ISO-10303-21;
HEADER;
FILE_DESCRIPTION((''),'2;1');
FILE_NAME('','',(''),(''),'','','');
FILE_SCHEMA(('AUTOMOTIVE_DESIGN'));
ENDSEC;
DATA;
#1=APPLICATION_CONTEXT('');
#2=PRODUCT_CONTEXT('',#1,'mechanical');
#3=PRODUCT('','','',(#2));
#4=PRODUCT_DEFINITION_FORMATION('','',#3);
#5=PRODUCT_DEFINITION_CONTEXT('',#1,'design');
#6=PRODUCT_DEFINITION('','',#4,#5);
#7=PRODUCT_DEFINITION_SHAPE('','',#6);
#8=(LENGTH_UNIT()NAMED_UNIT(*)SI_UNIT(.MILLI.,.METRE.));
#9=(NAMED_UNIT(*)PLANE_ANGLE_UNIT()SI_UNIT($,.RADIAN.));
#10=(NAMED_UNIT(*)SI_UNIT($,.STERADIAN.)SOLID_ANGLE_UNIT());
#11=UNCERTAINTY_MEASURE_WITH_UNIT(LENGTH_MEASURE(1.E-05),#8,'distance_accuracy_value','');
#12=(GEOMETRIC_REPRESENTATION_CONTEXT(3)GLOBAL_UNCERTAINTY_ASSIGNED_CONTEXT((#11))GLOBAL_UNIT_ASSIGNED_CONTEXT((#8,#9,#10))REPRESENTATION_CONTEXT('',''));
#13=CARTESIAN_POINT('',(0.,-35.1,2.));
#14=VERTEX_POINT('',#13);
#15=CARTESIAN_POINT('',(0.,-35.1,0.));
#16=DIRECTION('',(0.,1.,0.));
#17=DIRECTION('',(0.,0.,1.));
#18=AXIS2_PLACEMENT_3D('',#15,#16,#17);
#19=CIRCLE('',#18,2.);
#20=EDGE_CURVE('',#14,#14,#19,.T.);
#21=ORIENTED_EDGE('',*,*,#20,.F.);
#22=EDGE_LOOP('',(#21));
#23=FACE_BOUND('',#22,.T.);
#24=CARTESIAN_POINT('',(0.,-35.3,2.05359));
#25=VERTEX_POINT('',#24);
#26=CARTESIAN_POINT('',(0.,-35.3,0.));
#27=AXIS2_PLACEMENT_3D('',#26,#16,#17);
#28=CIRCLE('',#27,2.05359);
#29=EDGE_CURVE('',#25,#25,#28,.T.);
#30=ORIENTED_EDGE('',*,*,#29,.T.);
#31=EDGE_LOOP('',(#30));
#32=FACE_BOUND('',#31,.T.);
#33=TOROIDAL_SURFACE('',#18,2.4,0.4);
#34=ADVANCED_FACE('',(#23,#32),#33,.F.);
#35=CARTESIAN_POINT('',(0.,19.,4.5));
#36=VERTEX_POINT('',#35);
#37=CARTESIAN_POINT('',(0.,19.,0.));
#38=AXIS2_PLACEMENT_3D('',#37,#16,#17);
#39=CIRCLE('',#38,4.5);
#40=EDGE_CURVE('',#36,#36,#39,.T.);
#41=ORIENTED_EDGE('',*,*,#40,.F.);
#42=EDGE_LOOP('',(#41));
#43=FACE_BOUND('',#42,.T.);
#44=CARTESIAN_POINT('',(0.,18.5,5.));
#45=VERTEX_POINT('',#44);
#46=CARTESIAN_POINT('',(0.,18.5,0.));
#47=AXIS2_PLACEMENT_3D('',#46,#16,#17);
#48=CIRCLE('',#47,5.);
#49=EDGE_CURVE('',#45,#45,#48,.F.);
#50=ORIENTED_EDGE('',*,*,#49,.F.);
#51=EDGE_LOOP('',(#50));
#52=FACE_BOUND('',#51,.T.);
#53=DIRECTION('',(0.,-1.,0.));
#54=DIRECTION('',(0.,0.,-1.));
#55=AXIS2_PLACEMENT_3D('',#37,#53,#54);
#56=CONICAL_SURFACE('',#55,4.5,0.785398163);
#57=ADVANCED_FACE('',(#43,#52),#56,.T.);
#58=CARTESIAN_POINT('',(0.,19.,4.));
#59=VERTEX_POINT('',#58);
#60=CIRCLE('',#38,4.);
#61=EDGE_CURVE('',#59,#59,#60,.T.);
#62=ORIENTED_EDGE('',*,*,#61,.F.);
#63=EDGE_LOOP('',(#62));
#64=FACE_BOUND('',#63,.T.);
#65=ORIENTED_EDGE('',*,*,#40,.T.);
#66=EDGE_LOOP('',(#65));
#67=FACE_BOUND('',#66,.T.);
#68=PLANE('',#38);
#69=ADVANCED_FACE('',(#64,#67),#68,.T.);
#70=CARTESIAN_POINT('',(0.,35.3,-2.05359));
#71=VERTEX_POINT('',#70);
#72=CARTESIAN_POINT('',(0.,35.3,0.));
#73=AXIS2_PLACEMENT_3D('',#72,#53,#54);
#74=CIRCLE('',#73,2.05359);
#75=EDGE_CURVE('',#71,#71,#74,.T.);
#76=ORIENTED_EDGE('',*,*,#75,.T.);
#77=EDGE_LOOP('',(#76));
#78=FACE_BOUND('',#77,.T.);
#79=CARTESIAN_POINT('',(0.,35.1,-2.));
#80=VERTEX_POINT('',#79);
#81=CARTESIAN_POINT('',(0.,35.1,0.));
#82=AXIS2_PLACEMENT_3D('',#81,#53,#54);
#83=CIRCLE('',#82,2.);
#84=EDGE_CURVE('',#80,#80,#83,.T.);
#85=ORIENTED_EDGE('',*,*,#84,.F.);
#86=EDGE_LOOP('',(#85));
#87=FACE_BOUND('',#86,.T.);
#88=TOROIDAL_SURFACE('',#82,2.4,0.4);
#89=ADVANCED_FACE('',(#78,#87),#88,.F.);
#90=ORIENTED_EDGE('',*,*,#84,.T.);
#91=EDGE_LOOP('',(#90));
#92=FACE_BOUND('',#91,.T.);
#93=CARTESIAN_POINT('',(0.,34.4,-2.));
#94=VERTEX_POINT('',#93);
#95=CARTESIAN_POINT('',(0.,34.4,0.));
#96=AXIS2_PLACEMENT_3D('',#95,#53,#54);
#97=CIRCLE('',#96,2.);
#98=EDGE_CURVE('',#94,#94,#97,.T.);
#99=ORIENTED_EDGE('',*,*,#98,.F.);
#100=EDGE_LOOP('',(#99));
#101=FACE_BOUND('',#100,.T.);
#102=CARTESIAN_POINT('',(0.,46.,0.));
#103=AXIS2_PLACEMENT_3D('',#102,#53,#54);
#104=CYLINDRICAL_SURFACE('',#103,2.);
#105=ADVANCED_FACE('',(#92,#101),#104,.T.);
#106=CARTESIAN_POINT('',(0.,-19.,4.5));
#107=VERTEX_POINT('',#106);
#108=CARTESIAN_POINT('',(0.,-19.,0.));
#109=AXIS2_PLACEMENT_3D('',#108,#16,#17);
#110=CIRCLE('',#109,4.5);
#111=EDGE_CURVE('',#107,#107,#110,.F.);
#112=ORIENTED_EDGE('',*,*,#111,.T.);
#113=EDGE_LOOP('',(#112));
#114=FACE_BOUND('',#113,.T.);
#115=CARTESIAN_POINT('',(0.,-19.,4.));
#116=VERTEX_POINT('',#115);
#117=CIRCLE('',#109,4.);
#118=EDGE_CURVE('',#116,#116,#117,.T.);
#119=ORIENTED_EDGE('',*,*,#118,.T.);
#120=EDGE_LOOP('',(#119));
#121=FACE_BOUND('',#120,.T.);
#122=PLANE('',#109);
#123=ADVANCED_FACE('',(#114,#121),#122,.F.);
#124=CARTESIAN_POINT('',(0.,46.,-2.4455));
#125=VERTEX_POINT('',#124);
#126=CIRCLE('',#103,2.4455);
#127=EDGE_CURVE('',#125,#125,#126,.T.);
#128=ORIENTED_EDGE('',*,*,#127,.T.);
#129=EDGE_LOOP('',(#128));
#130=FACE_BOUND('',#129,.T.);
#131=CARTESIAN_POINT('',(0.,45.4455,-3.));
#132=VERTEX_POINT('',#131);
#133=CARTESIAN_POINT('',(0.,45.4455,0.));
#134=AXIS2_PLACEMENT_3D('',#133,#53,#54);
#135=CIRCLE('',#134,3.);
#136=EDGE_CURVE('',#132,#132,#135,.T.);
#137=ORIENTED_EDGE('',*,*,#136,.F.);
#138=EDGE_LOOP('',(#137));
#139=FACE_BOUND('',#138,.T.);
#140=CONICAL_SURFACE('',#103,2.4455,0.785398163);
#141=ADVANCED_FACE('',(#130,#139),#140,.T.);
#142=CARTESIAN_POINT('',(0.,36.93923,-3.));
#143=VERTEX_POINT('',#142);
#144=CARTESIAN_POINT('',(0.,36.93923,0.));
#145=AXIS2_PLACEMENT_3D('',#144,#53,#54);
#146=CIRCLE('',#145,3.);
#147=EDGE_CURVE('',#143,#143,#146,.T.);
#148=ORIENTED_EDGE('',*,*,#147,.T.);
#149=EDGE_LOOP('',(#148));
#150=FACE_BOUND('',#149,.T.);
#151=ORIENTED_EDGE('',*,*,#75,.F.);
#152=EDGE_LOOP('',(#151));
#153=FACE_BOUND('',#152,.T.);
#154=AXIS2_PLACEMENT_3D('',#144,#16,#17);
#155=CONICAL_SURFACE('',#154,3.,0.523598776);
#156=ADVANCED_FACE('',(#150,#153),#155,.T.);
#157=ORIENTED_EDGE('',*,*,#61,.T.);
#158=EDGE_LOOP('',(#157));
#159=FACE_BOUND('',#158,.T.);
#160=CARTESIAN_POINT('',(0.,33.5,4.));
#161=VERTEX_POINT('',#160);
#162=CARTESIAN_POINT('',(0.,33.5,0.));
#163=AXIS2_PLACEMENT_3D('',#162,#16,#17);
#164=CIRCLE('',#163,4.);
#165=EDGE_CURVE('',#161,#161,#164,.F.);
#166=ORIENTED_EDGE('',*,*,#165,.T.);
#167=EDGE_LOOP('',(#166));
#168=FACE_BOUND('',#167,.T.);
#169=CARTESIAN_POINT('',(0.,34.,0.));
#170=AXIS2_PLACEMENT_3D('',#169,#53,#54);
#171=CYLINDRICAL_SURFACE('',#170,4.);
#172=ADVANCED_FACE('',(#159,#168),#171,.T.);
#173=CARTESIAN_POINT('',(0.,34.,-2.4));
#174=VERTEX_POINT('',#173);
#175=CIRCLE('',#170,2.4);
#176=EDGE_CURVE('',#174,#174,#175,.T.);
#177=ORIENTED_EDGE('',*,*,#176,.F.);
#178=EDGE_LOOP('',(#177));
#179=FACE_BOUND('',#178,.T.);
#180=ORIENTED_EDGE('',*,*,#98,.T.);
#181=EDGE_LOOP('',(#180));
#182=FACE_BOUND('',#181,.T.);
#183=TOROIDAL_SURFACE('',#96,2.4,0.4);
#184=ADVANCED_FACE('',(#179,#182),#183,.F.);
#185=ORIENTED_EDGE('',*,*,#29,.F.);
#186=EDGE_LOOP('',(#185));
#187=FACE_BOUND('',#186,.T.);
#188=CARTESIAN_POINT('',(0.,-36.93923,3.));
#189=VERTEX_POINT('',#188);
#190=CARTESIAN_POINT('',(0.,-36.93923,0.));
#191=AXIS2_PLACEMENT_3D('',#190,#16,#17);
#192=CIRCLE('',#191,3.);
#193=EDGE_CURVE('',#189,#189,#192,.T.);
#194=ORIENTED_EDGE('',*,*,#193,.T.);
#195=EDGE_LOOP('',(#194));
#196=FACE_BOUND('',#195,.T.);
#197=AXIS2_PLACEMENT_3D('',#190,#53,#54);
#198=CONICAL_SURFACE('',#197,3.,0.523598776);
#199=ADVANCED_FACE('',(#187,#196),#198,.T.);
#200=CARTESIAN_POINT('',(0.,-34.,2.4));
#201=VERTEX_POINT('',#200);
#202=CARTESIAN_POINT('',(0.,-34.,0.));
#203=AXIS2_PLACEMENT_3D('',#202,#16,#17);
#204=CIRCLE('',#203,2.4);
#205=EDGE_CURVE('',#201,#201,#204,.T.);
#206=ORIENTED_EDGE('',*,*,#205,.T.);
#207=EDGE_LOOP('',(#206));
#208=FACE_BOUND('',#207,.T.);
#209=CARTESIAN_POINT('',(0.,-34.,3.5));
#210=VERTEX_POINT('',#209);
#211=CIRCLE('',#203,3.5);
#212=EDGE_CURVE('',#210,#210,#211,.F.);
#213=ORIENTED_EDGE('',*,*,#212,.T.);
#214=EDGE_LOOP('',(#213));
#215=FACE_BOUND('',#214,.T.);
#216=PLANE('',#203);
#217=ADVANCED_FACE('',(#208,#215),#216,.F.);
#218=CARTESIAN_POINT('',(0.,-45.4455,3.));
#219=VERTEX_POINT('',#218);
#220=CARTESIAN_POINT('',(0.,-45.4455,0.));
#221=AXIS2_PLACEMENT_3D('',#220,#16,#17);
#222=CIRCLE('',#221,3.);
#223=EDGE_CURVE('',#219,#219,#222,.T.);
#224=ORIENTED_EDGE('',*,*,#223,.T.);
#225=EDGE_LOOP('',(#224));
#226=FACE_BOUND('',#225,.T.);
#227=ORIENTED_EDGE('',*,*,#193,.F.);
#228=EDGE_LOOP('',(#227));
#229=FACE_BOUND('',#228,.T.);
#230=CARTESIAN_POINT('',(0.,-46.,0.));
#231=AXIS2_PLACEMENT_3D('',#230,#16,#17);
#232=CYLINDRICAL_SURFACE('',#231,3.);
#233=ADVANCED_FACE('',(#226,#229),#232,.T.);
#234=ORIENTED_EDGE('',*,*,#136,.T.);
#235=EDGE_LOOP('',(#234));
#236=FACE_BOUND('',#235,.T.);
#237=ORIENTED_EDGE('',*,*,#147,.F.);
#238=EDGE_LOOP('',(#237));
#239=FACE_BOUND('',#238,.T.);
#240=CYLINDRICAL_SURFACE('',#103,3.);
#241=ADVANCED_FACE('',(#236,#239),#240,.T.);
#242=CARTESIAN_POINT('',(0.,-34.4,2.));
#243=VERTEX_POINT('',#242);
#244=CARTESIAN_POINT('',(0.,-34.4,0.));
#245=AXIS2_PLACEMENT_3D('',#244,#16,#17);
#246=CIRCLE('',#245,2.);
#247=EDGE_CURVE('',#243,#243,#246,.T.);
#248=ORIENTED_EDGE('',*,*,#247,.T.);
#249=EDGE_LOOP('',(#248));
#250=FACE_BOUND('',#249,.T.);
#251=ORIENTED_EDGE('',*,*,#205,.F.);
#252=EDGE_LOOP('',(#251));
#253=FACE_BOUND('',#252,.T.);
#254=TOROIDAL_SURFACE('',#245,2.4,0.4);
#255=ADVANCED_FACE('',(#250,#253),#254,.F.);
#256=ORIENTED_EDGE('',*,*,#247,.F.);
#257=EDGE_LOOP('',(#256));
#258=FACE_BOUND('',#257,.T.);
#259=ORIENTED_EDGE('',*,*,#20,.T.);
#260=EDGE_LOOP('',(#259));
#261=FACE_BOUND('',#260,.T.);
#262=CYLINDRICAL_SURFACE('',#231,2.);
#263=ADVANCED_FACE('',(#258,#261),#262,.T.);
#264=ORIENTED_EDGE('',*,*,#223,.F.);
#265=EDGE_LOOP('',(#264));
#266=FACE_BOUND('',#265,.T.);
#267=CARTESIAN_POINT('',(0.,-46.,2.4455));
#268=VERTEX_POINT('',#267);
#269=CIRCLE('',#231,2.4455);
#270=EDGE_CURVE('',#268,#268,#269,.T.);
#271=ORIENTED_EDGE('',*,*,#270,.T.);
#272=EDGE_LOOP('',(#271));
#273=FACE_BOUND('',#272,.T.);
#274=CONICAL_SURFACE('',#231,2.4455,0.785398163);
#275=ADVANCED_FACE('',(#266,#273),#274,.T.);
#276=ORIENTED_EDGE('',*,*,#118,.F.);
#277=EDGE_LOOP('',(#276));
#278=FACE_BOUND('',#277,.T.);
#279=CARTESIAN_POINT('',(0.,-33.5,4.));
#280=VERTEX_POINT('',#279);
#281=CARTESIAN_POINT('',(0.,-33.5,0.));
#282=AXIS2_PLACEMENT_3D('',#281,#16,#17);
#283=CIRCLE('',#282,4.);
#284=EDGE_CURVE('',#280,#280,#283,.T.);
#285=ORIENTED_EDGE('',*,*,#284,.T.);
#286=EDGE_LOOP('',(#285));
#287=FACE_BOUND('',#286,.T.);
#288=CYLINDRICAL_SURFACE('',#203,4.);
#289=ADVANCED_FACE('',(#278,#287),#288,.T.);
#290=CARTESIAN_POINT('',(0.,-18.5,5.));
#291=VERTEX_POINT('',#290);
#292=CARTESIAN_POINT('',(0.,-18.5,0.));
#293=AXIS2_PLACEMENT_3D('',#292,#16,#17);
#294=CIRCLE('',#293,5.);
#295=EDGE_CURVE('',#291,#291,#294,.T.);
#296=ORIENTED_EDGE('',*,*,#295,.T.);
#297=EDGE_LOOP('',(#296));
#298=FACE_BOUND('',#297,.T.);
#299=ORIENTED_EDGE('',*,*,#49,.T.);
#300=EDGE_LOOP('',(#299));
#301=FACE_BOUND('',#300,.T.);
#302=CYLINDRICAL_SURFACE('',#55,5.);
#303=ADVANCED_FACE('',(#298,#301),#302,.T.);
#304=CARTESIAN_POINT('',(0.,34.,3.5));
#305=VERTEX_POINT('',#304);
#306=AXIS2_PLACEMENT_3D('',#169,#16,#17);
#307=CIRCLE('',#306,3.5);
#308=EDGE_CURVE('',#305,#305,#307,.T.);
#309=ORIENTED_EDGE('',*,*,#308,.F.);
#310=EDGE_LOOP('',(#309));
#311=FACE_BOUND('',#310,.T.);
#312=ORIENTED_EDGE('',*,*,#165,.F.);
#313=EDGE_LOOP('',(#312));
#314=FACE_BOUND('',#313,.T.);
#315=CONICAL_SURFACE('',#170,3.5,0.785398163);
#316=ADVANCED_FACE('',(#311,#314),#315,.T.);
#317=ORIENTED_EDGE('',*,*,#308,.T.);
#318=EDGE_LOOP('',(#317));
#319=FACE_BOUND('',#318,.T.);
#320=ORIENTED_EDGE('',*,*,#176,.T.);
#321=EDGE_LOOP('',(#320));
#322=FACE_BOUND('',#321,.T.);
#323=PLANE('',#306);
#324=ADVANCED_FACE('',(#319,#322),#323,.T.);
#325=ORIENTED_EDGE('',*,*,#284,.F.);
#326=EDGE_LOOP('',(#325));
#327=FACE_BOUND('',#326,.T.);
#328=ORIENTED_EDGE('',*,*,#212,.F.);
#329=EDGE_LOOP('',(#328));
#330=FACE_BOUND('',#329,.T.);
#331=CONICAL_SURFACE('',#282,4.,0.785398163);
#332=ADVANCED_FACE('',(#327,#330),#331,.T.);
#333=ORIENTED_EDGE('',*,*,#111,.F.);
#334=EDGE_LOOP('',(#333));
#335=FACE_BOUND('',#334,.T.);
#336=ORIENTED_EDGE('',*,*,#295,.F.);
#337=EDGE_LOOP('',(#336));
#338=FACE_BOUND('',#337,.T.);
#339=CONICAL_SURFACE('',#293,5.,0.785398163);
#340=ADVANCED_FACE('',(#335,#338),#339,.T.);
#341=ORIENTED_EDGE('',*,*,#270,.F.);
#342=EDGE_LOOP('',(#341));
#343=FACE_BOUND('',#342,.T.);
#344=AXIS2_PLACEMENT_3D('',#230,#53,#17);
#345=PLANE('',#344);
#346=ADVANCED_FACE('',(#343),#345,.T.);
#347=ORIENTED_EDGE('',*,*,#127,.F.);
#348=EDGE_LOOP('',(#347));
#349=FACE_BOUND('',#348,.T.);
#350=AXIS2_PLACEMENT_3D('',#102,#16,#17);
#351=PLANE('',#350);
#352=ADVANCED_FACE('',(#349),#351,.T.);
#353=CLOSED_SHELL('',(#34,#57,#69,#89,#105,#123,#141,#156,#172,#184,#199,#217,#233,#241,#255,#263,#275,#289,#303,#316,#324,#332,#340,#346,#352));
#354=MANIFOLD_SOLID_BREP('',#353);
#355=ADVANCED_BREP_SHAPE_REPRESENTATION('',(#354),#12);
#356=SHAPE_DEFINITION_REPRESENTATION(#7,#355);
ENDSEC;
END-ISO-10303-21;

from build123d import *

# Parameters (mm, degrees)
SKETCH1_R           = 5
BOSS_EXTRUDE1_DEPTH = 19
SKETCH2_R           = 4
BOSS_EXTRUDE2_DEPTH = 15
BOSS_EXTRUDE3_START = -53
SKETCH2_2_R         = 4
BOSS_EXTRUDE3_DEPTH = 15
CHAMFER2_SIZE       = 0.5
SKETCH3_R           = 3.1
BOSS_EXTRUDE4_DEPTH = 12
CHAMFER3_SIZE       = 0.5


# Read off the part's stored shape, not the designer's step: M6 Machine Threads Stud1, M6 Machine Threads Stud2
with BuildPart() as part:
    # Sketch1 → Boss-Extrude1 (new, symmetric)
    with BuildSketch(Plane(origin=(0, 0, 0), x_dir=(1, 0, 0), z_dir=(0, 1, 0))):
        with Locations(Location((0, 0, 0), (0, 0, 270))):
            Circle(SKETCH1_R)
    extrude(amount=BOSS_EXTRUDE1_DEPTH, both=True)

    # Sketch2 → Boss-Extrude2 (add)
    with BuildSketch(Plane(origin=(0, 19, 0), x_dir=(1, 0, 0), z_dir=(0, 1, 0))):
        with Locations(Location((0, 0, 0), (0, 0, 270))):
            Circle(SKETCH2_R)
    extrude(amount=BOSS_EXTRUDE2_DEPTH)

    # Sketch2<2> → Boss-Extrude3 (add)
    with BuildSketch(Plane(origin=(0, 19, 0), x_dir=(1, 0, 0), z_dir=(0, 1, 0)).offset(BOSS_EXTRUDE3_START)):
        with Locations(Location((0, 0, 0), (0, 0, 270))):
            Circle(SKETCH2_2_R)
    extrude(amount=BOSS_EXTRUDE3_DEPTH)

    # Chamfer2
    chamfer2_edges = [part.edges().sort_by_distance(p)[0] for p in [
        (0, -19, -5),
        (0, 19, -5),
    ]]
    chamfer(chamfer2_edges, length=CHAMFER2_SIZE)

    # Sketch3 → Boss-Extrude4 (add)
    with BuildSketch(Plane(origin=(0, 34, 0), x_dir=(1, 0, 0), z_dir=(0, 1, 0))):
        with Locations(Location((0, 0, 0), (0, 0, 270))):
            Circle(SKETCH3_R)
    boss_extrude4 = extrude(amount=BOSS_EXTRUDE4_DEPTH)

    # M6 Machine Threads Stud1 outline → M6 Machine Threads Stud1 (revolve, cut)
    with BuildSketch(Plane.XY):
        with BuildLine():
            Line((3.1, 46), (2.4455, 46))
            Line((2.4455, 46), (3, 45.4455))
            Line((3, 45.4455), (3, 36.939230485))
            Line((3, 36.939230485), (2.053589838, 35.3))
            ThreePointArc((2.053589838, 35.3), (2.013629669, 35.203527618), (2, 35.1))
            Line((2, 35.1), (2, 34.4))
            ThreePointArc((2, 34.4), (2.117157288, 34.117157288), (2.4, 34))
            Line((2.4, 34), (3.1, 34))
            Line((3.1, 34), (3.1, 46))
        make_face()
    revolve(axis=Axis((0, 0, 0), (0, 1, 0)), mode=Mode.SUBTRACT)

    # Mirror1: Boss-Extrude4 across plane
    add(boss_extrude4.mirror(Plane.ZX))

    # M6 Machine Threads Stud2 outline → M6 Machine Threads Stud2 (revolve, cut)
    with BuildSketch(Plane.XY):
        with BuildLine():
            Line((2.4455, -46), (3.1, -46))
            Line((3.1, -46), (3.1, -34))
            Line((3.1, -34), (2.4, -34))
            ThreePointArc((2.4, -34), (2.117157288, -34.117157288), (2, -34.4))
            Line((2, -34.4), (2, -35.1))
            ThreePointArc((2, -35.1), (2.013629669, -35.203527618), (2.053589838, -35.3))
            Line((2.053589838, -35.3), (3, -36.939230485))
            Line((3, -36.939230485), (3, -45.4455))
            Line((3, -45.4455), (2.4455, -46))
        make_face()
    revolve(axis=Axis((0, 0, 0), (0, 1, 0)), mode=Mode.SUBTRACT)

    # Chamfer3
    chamfer3_edges = [part.edges().sort_by_distance(p)[0] for p in [
        (0, -34, -4),
        (0, 34, -4),
    ]]
    chamfer(chamfer3_edges, length=CHAMFER3_SIZE)


solid = part.part
